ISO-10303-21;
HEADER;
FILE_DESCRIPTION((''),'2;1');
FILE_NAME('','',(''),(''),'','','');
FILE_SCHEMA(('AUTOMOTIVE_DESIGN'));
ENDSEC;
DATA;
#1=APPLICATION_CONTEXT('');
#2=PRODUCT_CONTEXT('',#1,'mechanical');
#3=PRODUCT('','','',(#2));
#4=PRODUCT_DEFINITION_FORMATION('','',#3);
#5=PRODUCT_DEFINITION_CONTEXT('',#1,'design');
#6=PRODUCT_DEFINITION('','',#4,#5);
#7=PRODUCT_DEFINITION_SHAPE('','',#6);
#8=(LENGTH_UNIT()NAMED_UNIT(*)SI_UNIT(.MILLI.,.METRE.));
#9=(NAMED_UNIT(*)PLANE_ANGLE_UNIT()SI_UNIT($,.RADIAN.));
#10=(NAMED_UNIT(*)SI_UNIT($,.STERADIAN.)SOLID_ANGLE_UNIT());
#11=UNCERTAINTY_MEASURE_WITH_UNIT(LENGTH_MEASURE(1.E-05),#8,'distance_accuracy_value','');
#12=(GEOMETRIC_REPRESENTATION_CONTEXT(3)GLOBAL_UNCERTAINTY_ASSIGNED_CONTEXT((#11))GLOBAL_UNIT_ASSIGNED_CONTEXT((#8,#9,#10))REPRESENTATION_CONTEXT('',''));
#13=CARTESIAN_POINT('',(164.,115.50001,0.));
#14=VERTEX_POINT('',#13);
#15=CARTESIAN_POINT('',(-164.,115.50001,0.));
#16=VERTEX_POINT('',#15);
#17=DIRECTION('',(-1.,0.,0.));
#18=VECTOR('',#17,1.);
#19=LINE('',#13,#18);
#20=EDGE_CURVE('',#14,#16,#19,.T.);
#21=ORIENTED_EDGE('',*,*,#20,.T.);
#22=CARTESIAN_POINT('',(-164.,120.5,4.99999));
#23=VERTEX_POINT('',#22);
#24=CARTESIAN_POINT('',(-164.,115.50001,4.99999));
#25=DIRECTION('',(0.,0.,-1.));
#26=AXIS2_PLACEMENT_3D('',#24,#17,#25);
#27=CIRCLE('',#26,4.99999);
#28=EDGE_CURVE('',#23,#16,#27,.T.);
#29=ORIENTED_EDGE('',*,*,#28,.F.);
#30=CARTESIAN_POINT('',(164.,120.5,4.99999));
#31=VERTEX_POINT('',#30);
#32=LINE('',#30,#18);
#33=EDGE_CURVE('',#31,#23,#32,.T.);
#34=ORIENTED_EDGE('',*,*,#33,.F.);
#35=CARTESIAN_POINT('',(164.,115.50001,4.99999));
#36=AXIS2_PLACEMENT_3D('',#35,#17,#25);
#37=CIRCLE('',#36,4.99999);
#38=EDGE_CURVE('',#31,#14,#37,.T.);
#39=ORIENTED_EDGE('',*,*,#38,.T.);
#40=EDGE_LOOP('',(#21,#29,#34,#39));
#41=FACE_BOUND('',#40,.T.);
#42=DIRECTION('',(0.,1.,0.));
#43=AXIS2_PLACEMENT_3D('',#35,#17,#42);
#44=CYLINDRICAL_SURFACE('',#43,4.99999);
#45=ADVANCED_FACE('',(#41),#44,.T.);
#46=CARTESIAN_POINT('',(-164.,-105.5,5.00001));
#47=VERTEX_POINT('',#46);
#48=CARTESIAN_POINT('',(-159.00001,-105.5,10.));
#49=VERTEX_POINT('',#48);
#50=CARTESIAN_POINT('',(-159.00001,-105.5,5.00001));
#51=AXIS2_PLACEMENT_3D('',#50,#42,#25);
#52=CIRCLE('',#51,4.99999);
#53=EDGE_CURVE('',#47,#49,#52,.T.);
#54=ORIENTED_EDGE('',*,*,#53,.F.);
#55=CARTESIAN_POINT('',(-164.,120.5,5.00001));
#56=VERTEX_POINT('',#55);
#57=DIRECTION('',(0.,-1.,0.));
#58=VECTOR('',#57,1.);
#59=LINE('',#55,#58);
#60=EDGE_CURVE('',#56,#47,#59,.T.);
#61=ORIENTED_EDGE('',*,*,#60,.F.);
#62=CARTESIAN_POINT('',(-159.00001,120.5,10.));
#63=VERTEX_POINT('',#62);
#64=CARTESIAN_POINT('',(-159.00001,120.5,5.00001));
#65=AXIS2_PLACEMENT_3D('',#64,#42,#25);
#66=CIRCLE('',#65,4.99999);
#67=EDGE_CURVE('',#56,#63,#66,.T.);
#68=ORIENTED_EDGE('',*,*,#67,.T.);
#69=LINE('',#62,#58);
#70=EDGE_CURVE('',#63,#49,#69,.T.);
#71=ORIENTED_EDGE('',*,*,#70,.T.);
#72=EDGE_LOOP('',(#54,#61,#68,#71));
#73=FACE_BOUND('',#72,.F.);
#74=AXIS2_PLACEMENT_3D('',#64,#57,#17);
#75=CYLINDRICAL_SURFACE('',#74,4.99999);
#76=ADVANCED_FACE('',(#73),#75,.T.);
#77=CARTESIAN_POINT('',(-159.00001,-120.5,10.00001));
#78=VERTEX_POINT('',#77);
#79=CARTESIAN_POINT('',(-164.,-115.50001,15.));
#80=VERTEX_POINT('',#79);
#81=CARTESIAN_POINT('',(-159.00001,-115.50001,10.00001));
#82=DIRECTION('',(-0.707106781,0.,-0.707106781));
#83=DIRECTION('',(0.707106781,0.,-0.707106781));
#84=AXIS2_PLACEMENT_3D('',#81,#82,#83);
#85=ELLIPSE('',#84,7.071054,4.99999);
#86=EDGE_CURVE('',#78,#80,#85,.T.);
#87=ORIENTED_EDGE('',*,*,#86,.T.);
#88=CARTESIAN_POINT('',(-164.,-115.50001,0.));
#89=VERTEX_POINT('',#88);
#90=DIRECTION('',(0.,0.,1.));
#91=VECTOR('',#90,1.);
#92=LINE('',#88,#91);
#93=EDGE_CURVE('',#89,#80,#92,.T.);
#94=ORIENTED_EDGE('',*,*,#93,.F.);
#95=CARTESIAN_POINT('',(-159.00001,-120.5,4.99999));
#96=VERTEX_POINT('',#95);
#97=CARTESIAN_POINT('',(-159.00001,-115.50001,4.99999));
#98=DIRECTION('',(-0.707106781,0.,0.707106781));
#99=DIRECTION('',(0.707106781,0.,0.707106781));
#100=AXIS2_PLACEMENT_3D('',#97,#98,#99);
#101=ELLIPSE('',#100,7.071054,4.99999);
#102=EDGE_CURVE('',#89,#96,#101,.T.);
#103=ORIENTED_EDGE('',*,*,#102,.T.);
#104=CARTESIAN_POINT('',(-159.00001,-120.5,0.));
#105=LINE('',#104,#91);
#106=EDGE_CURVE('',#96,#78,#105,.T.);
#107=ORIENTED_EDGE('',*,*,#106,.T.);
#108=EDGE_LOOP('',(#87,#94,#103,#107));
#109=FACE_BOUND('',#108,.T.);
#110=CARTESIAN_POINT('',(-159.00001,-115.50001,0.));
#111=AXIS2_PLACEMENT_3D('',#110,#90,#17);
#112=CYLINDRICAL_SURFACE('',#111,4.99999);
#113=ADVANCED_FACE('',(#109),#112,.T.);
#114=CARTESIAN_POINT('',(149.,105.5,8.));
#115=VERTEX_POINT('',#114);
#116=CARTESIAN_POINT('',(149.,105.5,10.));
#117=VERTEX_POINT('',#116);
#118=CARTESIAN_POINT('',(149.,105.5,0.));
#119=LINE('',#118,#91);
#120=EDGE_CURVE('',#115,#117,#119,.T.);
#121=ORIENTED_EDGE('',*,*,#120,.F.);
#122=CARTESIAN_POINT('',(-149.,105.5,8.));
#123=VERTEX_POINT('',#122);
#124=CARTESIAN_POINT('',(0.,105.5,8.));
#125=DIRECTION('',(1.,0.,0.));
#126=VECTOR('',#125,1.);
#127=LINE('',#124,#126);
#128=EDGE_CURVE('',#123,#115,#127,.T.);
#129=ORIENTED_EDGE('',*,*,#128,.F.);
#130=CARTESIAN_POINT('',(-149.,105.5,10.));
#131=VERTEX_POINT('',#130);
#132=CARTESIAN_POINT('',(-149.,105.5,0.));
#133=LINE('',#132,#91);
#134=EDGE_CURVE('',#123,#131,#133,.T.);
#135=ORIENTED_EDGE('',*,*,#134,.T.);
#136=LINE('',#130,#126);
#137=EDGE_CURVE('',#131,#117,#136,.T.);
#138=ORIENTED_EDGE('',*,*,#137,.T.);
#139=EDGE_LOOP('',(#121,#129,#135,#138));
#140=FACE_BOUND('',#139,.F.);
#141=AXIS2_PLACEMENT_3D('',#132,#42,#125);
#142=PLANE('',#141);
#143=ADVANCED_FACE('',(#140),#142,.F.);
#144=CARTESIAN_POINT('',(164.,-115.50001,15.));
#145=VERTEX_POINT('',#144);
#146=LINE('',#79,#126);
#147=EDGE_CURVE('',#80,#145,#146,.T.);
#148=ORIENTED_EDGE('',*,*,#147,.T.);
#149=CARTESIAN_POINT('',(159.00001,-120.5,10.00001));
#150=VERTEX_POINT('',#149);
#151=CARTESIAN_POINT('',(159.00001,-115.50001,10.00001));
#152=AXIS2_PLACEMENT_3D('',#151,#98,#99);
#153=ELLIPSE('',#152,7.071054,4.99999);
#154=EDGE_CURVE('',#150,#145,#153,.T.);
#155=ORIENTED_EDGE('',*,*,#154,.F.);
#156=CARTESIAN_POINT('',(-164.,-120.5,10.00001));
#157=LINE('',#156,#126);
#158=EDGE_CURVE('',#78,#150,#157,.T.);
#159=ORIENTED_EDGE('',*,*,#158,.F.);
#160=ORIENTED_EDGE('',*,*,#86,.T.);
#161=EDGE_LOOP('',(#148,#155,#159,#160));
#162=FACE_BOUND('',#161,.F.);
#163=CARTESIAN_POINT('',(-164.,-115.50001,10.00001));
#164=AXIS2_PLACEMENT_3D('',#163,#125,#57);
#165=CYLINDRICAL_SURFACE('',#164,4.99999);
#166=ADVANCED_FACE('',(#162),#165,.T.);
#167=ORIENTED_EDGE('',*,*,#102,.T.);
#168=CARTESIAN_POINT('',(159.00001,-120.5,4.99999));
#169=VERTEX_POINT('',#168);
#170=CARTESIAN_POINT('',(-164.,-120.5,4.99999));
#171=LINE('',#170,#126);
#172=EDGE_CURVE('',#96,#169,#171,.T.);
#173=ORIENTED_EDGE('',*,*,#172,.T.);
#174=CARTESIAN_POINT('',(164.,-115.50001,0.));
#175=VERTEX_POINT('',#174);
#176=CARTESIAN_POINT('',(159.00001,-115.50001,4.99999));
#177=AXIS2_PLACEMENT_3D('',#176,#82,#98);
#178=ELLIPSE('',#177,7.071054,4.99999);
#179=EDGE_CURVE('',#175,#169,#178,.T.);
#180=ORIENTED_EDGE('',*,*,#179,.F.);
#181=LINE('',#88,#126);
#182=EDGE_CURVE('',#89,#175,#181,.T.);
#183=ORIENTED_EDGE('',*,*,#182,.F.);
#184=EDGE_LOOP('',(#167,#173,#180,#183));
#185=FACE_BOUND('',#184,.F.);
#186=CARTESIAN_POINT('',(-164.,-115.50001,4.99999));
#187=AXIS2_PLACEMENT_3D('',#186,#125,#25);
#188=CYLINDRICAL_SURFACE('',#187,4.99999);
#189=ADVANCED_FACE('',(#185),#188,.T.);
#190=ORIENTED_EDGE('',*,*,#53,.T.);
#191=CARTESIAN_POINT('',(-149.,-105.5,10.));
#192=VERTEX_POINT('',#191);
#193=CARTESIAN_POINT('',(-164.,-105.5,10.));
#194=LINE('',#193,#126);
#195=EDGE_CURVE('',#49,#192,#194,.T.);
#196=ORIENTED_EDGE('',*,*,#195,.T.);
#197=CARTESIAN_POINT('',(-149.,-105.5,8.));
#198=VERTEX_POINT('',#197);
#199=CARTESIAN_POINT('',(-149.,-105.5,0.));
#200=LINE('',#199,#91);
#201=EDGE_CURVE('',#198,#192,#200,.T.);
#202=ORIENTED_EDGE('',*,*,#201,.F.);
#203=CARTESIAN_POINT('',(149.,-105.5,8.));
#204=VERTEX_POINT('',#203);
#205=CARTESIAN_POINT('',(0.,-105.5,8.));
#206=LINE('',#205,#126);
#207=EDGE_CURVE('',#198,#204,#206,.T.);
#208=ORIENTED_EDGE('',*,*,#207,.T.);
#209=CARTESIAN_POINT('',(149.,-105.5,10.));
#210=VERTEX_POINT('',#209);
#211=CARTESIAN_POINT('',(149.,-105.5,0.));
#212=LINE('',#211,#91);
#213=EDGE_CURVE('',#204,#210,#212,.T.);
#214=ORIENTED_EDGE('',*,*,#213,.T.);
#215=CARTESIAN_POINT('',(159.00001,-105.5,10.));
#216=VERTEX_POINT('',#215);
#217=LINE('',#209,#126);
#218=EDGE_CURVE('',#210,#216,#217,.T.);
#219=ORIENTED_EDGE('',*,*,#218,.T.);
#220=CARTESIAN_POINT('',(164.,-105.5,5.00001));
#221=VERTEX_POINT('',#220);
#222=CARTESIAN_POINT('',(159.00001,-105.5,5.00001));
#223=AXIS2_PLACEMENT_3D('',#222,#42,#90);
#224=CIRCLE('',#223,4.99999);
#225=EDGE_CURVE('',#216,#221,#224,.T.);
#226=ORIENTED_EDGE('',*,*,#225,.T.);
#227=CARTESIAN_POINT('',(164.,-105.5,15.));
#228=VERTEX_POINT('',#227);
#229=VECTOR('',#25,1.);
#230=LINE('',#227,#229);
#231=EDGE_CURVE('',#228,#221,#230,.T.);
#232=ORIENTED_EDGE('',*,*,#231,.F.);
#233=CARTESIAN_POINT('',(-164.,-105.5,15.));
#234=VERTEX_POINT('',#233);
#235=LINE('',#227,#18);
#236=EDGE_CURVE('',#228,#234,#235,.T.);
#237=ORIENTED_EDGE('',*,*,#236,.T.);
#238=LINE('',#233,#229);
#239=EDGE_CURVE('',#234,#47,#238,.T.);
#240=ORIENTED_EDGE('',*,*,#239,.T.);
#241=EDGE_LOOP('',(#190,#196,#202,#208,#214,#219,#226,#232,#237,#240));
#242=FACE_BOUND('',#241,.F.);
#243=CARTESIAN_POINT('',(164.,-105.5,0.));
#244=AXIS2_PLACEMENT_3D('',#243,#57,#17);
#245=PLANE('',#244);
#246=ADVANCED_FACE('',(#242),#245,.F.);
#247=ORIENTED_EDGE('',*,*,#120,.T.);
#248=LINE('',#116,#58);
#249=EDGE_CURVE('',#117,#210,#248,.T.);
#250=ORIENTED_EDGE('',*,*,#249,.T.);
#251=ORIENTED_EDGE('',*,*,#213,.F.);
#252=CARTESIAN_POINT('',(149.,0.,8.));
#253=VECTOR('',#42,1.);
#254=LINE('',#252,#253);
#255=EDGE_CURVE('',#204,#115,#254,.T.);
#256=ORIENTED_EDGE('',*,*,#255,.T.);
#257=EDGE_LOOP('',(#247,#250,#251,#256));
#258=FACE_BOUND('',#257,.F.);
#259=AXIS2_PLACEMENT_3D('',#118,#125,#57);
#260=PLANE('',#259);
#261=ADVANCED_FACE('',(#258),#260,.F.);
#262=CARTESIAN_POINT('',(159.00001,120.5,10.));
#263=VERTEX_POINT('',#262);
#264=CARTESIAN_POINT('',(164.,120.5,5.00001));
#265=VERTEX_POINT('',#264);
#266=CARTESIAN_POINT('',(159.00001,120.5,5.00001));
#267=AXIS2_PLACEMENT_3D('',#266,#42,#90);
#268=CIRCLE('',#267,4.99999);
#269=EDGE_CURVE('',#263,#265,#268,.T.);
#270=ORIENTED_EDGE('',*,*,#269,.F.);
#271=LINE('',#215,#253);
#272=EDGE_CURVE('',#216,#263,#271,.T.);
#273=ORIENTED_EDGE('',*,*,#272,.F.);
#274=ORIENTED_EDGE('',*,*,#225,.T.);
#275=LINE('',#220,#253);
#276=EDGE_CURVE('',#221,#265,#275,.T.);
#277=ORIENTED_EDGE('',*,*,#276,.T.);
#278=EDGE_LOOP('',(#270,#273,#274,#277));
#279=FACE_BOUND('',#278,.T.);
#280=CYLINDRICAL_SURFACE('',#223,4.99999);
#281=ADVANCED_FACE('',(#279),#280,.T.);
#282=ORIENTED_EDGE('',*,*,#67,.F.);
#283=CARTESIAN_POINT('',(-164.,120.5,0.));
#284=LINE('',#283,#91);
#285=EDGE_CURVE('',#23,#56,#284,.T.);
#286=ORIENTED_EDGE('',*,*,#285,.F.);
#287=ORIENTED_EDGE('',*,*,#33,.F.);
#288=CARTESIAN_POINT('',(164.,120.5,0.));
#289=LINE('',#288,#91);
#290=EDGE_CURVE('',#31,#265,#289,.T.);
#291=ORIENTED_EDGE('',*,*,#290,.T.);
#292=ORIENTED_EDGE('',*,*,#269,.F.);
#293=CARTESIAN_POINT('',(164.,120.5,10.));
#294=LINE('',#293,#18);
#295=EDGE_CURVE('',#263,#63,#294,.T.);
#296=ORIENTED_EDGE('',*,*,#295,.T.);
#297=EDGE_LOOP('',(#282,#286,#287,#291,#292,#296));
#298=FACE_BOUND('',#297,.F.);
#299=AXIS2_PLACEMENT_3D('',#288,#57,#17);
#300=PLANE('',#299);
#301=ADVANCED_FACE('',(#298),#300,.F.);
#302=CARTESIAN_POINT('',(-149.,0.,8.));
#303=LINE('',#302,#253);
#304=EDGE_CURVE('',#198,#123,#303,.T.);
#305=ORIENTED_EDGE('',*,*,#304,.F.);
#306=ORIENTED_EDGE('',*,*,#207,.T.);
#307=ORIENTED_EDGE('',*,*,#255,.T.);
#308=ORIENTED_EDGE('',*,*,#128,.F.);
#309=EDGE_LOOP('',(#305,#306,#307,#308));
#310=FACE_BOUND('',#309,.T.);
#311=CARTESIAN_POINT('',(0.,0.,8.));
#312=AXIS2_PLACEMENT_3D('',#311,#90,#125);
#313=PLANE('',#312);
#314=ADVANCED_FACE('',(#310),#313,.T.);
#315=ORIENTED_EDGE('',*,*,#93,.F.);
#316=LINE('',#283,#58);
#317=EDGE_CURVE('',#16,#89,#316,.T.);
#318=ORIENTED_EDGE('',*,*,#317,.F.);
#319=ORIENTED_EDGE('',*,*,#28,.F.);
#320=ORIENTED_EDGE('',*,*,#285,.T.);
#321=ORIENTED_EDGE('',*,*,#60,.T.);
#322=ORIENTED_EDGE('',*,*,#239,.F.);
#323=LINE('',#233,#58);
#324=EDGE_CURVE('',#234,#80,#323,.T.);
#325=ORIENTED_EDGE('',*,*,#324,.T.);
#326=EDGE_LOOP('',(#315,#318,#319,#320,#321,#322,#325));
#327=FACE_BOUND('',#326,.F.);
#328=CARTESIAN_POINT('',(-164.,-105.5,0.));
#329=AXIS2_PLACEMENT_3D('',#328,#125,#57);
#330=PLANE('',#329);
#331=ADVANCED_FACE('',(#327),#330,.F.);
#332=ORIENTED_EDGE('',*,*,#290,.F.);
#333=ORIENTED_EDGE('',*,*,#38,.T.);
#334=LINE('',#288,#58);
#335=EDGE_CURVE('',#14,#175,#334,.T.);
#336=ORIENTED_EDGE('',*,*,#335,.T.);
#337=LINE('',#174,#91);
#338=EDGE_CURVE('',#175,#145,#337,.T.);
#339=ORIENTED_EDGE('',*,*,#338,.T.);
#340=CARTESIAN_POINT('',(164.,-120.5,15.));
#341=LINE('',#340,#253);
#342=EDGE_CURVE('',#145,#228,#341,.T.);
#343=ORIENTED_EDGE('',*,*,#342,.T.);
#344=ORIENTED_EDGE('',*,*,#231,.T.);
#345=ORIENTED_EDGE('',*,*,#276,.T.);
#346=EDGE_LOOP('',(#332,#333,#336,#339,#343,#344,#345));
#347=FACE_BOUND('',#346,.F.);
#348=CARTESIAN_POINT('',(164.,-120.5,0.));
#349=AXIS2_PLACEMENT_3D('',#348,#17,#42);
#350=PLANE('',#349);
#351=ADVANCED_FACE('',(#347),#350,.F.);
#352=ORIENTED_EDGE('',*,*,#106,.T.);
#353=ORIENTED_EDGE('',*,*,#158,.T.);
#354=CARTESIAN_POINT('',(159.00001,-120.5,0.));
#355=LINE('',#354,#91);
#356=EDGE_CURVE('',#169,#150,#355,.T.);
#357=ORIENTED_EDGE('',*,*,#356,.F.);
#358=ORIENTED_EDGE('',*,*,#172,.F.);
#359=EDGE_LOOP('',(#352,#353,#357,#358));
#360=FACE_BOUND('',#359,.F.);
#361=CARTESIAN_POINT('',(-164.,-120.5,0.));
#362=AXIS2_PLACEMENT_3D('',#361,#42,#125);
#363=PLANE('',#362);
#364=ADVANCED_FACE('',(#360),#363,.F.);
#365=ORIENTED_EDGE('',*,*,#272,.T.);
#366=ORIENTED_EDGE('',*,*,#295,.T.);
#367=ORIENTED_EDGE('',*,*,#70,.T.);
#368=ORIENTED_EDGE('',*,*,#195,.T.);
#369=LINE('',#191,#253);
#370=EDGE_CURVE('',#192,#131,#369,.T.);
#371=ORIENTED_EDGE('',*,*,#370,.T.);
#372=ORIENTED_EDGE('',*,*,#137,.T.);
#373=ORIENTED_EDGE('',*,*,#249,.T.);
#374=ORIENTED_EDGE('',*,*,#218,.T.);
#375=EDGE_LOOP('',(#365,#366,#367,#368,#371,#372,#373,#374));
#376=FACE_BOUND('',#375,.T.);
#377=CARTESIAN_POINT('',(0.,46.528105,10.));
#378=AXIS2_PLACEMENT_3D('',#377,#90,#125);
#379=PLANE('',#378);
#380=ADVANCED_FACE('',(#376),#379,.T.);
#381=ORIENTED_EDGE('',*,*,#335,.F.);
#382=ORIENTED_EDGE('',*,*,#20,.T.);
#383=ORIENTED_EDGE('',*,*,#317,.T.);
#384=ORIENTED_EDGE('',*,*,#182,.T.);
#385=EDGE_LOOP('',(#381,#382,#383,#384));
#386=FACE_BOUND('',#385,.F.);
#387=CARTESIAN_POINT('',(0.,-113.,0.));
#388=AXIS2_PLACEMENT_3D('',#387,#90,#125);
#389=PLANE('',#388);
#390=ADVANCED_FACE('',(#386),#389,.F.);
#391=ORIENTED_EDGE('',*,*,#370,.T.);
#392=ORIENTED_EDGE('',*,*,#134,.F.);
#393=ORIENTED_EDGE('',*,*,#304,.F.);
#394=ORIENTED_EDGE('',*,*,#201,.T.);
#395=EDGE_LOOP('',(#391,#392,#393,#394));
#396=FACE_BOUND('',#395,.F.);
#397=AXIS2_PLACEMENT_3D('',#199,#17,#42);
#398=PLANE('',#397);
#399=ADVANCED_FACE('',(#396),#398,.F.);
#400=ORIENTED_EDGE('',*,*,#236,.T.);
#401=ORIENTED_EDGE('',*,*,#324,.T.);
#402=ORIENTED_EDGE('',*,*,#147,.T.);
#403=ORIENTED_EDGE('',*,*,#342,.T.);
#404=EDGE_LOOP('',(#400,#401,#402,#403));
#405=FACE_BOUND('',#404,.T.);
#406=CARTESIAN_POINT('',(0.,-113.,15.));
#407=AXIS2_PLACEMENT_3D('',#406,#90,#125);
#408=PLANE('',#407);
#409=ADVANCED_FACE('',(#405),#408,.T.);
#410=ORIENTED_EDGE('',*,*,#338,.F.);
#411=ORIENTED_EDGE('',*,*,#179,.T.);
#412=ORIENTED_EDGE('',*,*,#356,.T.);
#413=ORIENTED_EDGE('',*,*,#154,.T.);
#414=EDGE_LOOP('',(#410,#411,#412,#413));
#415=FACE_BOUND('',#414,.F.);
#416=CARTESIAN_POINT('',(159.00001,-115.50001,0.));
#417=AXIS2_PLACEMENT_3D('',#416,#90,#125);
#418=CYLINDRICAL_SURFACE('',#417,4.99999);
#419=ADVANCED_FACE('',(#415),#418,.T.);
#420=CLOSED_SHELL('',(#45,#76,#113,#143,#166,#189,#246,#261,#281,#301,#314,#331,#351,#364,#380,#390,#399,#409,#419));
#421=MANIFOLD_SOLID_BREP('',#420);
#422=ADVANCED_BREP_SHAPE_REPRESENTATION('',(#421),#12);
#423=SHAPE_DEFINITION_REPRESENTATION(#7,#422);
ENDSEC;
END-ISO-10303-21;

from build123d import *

# Parameters (mm, degrees)
F1_DEPTH = 10
F0_W     = 298
F0_H     = 211
F2_DEPTH = 8
F3_DEPTH = 15
F4_R     = 4.99999


# Not quite as in the source:
# - a fillet or chamfer is up to 0.001 mm smaller than in the source, because OpenCascade refuses the exact size


with BuildPart() as f1:
    # F0 (on Top) → F1 (new body)
    with BuildSketch(Plane.XY):
        Polygon((-149, -105.5), (-149, 105.5), (149, 105.5), (149, -105.5), (164, -105.5), (164, 120.5), (-164, 120.5), (-164, -105.5), align=None)
    extrude(amount=F1_DEPTH)

    # F0 (on Top) → F2 (join)
    with BuildSketch(Plane.XY):
        Rectangle(F0_W, F0_H)
    extrude(amount=F2_DEPTH)

    # F0 (on Top) → F3 (join)
    with BuildSketch(Plane.XY):
        Polygon((149, -105.5), (-149, -105.5), (-164, -105.5), (-164, -120.5), (164, -120.5), (164, -105.5), align=None)
    extrude(amount=F3_DEPTH)

    # F4 (radius 5 in the source; OpenCascade refuses exactly that, so slightly less here)
    f4_edges = [f1.edges().sort_by_distance(p)[0] for p in [
        (0, 120.5, 0),
        (-164, 7.5, 10),
        (164, 7.5, 10),
        (0, -120.5, 15),
        (164, -120.5, 7.5),
        (-164, -120.5, 7.5),
        (0, -120.5, 0),
    ]]
    fillet(f4_edges, radius=F4_R)


solid = f1.part
